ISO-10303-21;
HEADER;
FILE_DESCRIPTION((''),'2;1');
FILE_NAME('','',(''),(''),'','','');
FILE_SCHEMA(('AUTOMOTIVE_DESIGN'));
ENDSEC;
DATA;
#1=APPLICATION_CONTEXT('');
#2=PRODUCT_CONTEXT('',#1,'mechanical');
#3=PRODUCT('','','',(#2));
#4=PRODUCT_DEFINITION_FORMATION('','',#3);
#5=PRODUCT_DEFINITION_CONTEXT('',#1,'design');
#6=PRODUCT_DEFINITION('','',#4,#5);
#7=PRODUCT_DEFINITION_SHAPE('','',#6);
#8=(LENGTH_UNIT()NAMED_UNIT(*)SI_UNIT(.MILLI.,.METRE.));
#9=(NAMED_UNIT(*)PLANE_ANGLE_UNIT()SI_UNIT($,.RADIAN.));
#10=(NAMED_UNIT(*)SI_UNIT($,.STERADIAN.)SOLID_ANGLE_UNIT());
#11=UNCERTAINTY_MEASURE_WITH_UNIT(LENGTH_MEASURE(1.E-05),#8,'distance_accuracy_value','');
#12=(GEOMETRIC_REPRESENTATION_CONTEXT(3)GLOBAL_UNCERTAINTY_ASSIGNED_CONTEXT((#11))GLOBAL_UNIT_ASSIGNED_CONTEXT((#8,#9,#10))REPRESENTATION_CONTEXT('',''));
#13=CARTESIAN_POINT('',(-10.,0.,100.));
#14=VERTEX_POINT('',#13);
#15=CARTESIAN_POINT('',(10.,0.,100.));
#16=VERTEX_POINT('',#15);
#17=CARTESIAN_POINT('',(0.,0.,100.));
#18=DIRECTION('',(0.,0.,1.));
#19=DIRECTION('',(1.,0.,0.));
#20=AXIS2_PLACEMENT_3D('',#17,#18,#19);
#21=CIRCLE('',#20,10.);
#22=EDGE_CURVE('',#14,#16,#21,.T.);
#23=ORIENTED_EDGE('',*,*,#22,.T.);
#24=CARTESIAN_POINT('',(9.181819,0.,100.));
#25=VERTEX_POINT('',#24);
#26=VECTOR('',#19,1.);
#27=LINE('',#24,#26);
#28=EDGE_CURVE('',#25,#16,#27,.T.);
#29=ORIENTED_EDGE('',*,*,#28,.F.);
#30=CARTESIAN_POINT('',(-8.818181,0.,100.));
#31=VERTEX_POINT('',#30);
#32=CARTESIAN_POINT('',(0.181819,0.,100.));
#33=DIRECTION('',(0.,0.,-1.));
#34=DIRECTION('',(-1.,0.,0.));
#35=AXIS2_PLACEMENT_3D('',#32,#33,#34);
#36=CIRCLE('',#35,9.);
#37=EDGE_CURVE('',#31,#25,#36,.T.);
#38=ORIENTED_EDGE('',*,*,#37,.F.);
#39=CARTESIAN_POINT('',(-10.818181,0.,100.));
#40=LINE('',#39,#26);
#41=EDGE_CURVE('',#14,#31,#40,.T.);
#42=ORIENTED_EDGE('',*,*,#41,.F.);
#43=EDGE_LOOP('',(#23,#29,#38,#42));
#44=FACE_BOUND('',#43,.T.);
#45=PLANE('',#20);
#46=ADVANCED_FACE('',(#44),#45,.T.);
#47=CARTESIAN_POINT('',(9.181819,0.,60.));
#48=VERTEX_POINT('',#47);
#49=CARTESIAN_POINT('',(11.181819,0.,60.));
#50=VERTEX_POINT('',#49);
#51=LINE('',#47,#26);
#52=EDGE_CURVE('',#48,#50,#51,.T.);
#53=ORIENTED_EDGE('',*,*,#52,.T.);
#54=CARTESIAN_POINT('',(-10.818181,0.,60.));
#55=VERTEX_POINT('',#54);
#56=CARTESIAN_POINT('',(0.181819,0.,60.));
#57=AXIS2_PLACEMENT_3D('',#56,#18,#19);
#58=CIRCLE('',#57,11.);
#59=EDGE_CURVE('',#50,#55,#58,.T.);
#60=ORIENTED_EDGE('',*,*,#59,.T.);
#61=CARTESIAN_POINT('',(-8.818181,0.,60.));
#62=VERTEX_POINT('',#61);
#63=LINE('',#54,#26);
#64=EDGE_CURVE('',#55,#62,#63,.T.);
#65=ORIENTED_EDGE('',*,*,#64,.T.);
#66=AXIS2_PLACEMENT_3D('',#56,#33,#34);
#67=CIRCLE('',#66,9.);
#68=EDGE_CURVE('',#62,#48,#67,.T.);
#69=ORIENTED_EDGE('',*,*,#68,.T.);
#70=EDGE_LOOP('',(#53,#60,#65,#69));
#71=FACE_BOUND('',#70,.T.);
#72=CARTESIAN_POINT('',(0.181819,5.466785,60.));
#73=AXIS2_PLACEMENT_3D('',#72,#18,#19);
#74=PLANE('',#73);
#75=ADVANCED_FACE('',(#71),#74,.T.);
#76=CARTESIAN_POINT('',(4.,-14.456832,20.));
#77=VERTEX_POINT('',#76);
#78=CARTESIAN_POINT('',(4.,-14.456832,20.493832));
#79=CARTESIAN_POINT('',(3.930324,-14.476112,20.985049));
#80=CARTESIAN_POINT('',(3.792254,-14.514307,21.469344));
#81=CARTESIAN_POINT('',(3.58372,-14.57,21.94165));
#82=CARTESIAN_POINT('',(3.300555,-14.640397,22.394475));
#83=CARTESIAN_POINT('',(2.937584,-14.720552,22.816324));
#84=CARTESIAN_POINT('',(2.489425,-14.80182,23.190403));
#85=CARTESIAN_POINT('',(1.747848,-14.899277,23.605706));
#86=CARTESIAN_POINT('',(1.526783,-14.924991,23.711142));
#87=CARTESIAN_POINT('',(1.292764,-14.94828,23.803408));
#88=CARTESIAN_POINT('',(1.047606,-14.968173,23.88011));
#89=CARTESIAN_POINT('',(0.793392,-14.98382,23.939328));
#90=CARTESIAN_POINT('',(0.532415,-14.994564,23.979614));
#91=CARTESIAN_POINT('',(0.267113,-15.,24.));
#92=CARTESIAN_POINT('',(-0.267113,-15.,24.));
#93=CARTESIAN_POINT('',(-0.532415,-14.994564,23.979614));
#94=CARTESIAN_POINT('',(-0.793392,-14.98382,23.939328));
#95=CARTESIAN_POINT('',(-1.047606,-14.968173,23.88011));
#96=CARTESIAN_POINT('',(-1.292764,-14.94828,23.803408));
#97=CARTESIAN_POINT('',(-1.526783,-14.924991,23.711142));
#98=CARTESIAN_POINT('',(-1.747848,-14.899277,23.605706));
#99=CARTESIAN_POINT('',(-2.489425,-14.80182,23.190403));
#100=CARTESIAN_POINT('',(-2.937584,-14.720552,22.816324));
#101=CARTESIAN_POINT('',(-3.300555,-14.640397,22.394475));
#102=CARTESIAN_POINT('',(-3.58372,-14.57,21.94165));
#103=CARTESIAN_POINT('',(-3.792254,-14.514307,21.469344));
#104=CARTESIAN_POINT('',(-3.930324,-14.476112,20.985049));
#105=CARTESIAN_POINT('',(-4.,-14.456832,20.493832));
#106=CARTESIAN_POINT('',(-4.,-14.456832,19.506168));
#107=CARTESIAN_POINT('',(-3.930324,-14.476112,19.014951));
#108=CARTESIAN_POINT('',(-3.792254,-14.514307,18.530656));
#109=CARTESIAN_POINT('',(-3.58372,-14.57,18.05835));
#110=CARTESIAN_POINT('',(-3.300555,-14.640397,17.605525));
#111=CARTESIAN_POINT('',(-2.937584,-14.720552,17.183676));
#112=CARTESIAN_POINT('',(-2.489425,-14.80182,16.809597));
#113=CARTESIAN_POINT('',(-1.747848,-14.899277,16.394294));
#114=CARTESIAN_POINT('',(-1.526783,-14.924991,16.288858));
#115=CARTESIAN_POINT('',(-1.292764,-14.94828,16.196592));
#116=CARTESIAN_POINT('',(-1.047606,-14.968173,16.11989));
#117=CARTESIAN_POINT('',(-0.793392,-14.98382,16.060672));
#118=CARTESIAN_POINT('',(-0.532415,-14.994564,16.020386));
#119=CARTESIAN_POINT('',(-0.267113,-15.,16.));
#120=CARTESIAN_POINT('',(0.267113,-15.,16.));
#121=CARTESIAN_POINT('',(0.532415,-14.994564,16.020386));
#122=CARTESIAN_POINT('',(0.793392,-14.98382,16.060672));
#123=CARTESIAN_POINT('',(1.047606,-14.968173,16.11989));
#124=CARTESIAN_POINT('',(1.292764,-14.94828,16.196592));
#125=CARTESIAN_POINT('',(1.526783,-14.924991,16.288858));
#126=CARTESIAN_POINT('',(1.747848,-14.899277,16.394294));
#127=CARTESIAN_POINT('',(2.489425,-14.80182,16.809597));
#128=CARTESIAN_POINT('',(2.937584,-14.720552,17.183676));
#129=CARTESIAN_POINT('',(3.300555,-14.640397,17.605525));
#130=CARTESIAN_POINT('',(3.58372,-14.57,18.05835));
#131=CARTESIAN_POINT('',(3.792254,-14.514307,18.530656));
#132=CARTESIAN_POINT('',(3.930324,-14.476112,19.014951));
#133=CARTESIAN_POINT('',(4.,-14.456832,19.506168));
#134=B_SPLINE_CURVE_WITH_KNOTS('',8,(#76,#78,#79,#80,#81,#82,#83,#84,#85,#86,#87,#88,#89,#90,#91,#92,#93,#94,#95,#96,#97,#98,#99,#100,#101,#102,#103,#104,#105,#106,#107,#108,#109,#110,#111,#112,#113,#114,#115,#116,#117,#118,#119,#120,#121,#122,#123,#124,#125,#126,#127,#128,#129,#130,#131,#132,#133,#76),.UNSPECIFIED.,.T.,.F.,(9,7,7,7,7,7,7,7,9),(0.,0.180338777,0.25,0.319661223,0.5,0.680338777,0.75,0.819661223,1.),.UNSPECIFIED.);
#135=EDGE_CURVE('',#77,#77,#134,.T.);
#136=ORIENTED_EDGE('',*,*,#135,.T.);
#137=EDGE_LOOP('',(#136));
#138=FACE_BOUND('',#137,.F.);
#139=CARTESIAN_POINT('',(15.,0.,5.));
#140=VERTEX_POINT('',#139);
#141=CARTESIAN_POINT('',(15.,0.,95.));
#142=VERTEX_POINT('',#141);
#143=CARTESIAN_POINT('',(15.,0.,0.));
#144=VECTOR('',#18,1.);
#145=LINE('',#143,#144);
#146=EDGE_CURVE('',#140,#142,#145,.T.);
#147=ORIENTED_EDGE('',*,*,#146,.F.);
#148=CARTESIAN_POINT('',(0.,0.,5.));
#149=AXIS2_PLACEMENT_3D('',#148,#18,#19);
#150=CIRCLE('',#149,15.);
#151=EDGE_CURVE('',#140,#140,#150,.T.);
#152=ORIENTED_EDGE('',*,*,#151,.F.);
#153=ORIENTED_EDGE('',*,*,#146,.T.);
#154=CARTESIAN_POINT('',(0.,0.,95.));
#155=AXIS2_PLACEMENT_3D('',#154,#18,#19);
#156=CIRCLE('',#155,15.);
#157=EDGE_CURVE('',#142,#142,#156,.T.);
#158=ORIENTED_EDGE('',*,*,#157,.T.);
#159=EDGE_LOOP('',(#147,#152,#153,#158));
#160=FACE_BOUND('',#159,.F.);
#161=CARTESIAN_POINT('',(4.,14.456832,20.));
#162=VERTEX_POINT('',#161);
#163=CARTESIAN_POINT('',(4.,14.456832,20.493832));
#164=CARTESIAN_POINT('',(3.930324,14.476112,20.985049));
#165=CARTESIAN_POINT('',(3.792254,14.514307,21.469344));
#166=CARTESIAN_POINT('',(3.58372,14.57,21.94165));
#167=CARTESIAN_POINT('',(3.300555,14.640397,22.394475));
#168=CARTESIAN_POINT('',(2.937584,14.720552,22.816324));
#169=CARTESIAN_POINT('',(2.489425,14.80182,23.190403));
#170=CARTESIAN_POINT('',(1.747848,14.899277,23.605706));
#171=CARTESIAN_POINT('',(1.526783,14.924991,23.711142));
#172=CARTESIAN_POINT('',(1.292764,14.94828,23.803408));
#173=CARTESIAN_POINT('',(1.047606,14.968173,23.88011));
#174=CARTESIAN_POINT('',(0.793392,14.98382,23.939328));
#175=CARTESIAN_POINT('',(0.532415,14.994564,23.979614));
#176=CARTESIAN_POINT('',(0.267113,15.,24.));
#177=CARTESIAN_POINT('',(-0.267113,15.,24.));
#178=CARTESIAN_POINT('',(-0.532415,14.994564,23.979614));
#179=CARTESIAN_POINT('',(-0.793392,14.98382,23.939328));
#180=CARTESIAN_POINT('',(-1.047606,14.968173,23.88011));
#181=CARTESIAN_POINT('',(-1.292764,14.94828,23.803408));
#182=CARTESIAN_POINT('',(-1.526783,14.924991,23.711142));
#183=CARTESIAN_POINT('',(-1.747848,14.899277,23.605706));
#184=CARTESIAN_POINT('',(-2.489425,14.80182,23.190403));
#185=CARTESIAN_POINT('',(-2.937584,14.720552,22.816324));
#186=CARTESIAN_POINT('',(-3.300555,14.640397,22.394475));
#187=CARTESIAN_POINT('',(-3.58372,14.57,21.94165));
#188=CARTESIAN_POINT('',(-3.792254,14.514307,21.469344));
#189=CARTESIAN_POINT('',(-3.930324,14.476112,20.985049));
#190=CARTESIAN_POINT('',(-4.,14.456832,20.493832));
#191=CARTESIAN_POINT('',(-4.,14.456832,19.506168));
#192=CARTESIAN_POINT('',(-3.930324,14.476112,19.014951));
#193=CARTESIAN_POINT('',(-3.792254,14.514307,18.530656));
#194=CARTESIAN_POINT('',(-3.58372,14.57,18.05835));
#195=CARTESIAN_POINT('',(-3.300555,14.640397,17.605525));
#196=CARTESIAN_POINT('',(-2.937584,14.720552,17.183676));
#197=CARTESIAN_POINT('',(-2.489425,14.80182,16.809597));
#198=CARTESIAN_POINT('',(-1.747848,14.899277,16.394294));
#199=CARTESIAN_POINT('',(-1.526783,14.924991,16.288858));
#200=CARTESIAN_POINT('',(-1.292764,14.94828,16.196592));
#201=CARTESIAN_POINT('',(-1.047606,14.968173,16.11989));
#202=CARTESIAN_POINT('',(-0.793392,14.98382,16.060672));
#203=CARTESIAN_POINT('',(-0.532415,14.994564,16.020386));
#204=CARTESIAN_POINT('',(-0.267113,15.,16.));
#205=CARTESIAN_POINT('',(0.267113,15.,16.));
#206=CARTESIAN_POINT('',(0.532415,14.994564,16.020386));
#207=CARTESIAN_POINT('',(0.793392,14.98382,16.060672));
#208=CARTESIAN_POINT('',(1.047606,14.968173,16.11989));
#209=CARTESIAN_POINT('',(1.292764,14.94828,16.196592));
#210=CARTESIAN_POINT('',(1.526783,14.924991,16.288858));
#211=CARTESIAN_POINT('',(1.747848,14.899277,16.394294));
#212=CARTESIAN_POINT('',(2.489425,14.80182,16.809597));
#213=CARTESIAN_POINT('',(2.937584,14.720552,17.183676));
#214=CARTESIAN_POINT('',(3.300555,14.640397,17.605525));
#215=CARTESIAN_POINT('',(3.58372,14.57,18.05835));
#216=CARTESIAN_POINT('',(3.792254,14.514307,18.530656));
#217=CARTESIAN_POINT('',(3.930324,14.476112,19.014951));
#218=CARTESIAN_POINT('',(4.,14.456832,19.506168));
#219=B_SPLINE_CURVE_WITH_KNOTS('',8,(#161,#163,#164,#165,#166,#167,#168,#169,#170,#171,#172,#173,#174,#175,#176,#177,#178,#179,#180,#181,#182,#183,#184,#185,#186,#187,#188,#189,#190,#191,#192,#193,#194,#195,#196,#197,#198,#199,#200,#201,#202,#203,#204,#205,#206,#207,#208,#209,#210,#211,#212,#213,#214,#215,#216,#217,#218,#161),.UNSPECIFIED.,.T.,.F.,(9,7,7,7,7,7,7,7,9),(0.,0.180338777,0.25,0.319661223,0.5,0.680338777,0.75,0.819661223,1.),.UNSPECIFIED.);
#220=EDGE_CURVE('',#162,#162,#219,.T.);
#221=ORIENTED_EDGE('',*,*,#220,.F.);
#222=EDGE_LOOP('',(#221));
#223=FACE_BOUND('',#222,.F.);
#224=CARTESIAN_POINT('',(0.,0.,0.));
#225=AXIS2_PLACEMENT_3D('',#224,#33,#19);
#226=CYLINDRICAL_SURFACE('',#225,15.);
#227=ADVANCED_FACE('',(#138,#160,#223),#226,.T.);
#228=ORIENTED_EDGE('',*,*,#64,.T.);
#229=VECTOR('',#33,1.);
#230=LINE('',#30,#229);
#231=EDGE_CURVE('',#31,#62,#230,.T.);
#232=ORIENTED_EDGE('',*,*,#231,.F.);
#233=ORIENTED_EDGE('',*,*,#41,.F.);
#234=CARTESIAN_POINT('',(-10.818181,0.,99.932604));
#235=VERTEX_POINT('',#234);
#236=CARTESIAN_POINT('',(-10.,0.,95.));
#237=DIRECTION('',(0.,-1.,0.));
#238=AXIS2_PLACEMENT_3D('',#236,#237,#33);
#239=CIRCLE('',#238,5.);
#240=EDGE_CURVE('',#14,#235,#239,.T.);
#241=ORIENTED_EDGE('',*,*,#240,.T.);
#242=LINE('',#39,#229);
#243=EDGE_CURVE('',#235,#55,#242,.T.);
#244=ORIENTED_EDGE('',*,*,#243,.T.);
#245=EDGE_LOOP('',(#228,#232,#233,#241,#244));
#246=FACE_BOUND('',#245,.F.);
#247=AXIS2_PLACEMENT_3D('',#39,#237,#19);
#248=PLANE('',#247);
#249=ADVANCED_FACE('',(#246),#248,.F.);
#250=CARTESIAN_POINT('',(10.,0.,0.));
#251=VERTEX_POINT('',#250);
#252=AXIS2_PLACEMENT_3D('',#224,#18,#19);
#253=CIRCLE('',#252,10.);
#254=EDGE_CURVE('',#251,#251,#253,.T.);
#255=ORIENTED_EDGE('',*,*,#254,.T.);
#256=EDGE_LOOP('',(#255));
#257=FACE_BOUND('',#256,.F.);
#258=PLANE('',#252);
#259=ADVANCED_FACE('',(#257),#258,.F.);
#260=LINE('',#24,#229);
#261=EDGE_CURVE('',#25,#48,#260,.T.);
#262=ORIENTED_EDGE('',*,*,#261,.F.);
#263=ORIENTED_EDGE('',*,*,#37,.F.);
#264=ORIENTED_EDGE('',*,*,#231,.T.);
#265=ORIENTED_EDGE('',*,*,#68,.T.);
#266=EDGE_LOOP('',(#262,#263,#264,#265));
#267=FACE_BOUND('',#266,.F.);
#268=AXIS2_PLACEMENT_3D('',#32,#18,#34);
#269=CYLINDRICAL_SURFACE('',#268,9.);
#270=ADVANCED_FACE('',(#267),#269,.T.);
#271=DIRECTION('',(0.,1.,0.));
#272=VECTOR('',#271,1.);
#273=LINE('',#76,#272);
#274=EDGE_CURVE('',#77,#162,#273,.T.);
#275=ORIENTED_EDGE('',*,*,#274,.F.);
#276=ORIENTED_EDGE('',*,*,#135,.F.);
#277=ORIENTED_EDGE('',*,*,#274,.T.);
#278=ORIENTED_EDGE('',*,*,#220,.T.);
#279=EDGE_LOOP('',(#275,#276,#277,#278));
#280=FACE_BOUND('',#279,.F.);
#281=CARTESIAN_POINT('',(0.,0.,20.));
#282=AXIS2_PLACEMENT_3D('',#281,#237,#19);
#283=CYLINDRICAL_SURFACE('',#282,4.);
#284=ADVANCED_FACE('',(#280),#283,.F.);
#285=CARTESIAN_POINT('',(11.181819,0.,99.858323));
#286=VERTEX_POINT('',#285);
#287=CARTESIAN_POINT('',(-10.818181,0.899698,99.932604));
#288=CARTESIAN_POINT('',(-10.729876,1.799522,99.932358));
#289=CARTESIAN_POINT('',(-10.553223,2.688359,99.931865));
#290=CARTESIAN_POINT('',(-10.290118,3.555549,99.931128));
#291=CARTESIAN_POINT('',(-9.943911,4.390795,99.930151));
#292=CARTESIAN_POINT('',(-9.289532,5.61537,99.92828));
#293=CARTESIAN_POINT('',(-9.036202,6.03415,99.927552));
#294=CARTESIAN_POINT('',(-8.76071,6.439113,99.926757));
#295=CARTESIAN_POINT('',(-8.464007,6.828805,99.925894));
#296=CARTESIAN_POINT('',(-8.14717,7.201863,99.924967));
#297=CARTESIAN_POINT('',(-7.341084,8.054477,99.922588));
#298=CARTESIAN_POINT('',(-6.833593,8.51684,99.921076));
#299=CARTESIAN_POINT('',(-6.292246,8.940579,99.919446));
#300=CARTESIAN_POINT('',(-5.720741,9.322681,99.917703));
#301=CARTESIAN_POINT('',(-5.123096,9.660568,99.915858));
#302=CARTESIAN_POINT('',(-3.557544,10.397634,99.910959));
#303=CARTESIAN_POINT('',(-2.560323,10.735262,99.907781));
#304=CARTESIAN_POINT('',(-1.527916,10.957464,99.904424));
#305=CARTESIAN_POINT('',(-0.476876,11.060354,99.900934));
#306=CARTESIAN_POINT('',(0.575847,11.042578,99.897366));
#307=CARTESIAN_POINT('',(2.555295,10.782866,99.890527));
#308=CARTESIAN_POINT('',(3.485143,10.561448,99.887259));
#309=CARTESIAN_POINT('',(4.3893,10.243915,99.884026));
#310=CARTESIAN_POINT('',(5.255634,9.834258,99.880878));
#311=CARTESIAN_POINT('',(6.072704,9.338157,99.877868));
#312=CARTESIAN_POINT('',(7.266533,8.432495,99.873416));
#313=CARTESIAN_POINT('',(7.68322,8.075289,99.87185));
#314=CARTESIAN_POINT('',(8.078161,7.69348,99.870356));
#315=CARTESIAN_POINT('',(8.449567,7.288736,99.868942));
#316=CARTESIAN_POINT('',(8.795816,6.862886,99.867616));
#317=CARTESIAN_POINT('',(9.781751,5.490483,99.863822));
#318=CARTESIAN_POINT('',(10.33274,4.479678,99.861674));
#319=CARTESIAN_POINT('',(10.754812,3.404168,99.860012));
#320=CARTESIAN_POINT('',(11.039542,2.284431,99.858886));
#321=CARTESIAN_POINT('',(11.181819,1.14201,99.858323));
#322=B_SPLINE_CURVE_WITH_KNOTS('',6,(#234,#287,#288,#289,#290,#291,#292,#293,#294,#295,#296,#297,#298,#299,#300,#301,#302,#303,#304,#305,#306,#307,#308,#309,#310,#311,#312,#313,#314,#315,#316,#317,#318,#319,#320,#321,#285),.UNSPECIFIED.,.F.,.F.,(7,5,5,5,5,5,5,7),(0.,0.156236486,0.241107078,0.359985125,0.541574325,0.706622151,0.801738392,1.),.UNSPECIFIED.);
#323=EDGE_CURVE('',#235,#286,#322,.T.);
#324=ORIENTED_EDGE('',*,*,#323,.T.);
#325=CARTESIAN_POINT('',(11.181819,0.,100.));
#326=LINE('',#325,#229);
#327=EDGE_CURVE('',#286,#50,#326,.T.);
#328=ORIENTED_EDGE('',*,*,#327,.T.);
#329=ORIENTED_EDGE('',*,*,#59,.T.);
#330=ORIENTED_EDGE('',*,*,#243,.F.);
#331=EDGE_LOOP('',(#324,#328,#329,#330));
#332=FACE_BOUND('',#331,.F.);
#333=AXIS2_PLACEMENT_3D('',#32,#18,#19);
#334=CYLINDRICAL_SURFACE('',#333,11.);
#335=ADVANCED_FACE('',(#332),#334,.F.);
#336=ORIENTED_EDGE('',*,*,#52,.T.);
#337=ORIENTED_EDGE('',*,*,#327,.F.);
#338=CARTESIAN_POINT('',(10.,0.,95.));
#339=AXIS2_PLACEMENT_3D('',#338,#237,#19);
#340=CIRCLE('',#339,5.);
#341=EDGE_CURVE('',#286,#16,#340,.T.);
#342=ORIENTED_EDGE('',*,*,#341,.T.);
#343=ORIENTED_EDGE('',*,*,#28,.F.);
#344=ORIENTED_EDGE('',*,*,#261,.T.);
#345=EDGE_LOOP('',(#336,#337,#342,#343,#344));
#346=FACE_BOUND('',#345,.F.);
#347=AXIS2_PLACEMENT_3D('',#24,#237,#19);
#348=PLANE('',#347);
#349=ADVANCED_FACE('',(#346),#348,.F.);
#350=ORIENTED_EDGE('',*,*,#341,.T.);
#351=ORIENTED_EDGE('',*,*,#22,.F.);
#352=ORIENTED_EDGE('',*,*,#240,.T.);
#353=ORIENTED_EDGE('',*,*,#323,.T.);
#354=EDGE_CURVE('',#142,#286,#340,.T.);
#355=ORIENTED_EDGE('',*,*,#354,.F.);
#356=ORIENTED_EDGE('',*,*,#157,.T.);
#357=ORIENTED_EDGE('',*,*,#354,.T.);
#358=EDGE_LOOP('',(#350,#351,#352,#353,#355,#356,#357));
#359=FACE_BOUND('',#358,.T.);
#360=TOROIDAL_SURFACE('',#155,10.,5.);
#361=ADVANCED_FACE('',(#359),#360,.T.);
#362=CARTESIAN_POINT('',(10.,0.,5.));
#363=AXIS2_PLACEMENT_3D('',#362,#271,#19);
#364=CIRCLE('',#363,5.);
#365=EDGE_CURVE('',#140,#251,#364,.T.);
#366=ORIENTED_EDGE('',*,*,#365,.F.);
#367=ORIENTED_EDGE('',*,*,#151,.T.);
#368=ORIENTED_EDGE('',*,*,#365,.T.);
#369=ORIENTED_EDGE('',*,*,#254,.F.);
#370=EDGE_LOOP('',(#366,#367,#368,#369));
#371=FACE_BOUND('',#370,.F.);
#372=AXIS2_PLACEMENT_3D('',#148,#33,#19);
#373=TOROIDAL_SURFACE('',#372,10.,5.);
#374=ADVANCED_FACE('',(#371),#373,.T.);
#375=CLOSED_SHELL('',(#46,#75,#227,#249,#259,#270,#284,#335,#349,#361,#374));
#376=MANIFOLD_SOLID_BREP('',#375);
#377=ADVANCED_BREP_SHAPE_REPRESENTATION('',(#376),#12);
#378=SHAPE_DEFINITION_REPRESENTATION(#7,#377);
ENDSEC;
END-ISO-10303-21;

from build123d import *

# Parameters (mm, degrees)
F0_R          = 15
F1_DEPTH      = 100
F3_DEPTH      = 40
F5_R          = 4
F6_DEPTH      = 25
F6_DEPTH_BACK = 25


# Not quite as in the source:
# - a fillet or chamfer that OpenCascade refuses, or shapes differently, is made with other operations: its cross-section is extruded or revolved along the edge and cut away or added


with BuildPart() as f1:
    # F0 (on Top) → F1 (new body)
    with BuildSketch(Plane.XY):
        Circle(F0_R)
    extrude(amount=F1_DEPTH)

    # F2 (on face) → F3 (cut)
    with BuildSketch(Plane.XY.offset(100)):
        with BuildLine():
            Line((9.1818189363, 0), (11.1818189363, 0))
            ThreePointArc((11.1818189363, 0), (0.1818189363, 11), (-10.8181810637, 0))
            Line((-10.8181810637, 0), (-8.8181810637, 0))
            ThreePointArc((-8.8181810637, 0), (0.1818189363, 9), (9.1818189363, 0))
        make_face()
    extrude(amount=-F3_DEPTH, mode=Mode.SUBTRACT)

    # F4: fillet of radius 5 on 2 edges, made by hand

    # F4_s1 → F4_t2 (revolve, cut)
    with BuildSketch(Plane.XZ):
        with BuildLine():
            ThreePointArc((15, 95), (13.5355339059, 98.5355339059), (10, 100))
            Line((10, 100), (15, 100))
            Line((15, 100), (15, 95))
        make_face()
    revolve(axis=Axis((0, 0, 100), (0, 0, 1)), mode=Mode.SUBTRACT)

    # F4_s3 → F4_t4 (revolve, cut)
    with BuildSketch(Plane.XZ):
        with BuildLine():
            ThreePointArc((15, 5), (13.5355339059, 1.4644660941), (10, 0))
            Line((10, 0), (15, 0))
            Line((15, 0), (15, 5))
        make_face()
    revolve(axis=Axis((0, 0, 0), (0, 0, 1)), mode=Mode.SUBTRACT)

    # F5 (on Front) → F6 (cut, two sides)
    with BuildSketch(Plane.XZ) as f6_sk:
        with Locations((0, 20)):
            Circle(F5_R)
    extrude(amount=-F6_DEPTH, mode=Mode.SUBTRACT)
    extrude(f6_sk.sketch, amount=F6_DEPTH_BACK, mode=Mode.SUBTRACT)


solid = f1.part
